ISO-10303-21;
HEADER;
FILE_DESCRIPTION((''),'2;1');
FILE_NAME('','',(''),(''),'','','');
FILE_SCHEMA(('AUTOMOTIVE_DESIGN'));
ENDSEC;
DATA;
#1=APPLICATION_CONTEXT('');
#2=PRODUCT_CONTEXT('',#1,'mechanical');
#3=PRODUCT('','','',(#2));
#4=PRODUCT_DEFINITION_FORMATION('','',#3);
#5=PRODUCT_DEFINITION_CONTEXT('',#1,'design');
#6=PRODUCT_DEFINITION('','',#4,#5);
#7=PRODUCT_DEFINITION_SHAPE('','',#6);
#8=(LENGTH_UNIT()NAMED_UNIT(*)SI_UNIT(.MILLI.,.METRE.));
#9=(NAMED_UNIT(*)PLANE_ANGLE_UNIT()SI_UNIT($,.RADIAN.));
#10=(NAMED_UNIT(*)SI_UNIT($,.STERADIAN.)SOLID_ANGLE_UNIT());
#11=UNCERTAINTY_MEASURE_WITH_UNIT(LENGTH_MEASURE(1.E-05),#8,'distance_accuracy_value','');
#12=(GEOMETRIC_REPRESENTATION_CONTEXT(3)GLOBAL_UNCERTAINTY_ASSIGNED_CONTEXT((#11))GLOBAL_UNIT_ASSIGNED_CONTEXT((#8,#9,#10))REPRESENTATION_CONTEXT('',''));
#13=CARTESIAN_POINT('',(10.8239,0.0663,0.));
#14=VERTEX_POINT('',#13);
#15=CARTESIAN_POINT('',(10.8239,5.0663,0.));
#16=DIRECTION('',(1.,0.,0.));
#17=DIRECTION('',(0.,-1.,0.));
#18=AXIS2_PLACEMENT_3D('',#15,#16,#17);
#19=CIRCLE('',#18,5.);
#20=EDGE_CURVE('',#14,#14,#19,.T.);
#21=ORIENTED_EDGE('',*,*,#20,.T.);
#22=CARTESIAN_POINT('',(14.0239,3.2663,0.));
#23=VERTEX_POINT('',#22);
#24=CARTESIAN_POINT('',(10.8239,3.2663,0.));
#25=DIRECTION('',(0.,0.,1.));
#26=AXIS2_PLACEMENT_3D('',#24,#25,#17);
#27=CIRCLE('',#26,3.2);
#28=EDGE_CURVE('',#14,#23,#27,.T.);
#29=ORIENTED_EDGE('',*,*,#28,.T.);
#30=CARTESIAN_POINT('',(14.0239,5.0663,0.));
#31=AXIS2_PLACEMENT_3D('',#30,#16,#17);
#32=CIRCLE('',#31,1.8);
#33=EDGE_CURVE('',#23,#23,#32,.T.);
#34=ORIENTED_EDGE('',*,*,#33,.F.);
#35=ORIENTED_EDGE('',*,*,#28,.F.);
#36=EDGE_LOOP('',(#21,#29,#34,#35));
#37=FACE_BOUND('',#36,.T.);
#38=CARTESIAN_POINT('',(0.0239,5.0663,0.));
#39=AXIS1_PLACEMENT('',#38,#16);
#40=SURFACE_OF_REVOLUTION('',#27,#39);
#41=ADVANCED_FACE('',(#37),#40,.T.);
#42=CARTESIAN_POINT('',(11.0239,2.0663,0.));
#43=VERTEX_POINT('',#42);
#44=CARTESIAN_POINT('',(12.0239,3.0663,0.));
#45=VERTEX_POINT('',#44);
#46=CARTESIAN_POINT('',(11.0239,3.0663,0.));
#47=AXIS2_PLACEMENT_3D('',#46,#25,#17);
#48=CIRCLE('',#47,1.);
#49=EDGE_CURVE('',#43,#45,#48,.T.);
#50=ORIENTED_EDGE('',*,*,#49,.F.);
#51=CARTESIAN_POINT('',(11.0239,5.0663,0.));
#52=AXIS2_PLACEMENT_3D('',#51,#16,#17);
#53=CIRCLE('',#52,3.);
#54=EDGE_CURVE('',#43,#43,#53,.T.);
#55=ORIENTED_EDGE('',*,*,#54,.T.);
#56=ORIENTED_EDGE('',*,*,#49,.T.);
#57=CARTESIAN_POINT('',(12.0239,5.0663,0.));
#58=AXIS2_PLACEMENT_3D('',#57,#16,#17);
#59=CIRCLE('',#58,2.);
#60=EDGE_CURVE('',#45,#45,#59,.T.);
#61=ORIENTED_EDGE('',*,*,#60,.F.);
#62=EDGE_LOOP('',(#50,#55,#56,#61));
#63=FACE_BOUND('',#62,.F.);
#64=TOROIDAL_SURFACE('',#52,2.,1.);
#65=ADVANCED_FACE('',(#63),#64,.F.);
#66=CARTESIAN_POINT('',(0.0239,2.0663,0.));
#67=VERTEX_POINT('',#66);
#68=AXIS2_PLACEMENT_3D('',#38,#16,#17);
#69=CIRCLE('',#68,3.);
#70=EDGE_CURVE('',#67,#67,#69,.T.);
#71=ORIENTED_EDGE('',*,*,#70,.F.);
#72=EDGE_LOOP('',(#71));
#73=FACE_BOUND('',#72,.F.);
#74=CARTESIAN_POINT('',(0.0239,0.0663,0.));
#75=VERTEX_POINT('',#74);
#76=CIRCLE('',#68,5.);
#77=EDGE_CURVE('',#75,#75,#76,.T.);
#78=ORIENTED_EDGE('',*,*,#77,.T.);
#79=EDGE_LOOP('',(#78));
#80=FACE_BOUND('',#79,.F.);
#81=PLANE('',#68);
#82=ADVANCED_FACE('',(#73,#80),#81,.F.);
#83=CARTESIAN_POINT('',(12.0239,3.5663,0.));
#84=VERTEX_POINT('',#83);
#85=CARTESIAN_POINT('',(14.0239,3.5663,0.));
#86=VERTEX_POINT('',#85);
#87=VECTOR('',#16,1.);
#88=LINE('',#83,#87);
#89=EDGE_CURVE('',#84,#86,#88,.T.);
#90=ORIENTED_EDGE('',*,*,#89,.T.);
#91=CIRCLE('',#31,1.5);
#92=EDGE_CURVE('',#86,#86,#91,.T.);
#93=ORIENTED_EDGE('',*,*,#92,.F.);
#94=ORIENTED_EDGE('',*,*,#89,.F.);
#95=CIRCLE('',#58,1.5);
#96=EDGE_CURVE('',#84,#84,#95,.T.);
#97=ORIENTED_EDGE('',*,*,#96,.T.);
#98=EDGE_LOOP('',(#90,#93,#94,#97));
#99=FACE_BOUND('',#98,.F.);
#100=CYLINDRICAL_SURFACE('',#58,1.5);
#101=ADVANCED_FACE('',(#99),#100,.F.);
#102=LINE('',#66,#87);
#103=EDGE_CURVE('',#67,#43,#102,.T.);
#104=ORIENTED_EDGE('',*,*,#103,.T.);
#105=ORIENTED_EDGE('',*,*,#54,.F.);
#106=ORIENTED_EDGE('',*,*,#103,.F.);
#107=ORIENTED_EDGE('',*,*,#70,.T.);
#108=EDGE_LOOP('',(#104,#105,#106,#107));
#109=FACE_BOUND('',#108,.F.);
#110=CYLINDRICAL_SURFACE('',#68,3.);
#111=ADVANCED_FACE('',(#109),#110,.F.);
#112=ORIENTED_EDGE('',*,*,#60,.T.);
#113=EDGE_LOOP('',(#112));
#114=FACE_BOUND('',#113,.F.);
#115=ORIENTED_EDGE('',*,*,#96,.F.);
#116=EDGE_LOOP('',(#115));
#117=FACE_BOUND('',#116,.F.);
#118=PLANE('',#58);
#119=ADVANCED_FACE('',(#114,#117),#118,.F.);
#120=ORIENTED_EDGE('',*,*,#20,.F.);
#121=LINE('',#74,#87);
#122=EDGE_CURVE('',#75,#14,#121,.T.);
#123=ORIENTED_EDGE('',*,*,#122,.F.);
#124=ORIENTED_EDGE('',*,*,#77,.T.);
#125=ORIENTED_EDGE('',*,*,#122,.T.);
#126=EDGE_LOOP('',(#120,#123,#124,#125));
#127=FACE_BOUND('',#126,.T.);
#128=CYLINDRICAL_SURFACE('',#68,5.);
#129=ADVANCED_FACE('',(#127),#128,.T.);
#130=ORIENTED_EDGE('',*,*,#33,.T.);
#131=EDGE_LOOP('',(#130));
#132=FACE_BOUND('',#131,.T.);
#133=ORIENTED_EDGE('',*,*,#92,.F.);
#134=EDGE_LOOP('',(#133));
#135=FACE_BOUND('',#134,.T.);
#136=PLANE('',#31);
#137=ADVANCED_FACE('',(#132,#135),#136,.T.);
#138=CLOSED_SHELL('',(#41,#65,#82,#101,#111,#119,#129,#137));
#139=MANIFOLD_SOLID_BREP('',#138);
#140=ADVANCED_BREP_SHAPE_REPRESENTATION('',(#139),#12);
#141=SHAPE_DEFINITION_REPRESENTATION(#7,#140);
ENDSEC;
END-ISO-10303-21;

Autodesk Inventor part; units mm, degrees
ref_plane "YZ Plane" through (0, 0, 0) normal (1, 0, 0) x (0, 1, 0)
ref_plane "XZ Plane" through (0, 0, 0) normal (0, 1, 0) x (-1, 0, 0)
ref_plane "XY Plane" through (0, 0, 0) normal (0, 0, 1) x (1, 0, 0)
sketch "Блок1" plane through (0, 0, 0) normal (0, 0, 1) x (1, 0, 0)
  line L0 (-20.8941, 6.9119) -> (-9.8941, 6.9119)
  line L1 (-8.8941, 8.4119) -> (-6.8941, 8.4119)
  point P0 (-11.6441, 7.6619)
sketch "Эскиз1" plane through (0, 0, 0) normal (0, 0, 1) x (1, 0, 0)
  line L0 (0.0239, 0.0663) -> (10.8239, 0.0663)
  line L1 (14.0239, 3.2663) -> (14.0239, 3.5663)
  arc A0 (10.8239, 0.0663) -> (14.0239, 3.2663) centre (10.8239, 3.2663) ccw
  line L2 (0.0239, 0.0663) -> (0.0239, 2.0663)
  line L3 (12.0239, 3.0663) -> (12.0239, 3.5663)
  arc A1 (11.0239, 2.0663) -> (12.0239, 3.0663) centre (11.0239, 3.0663) ccw
  line L4 (14.0239, 3.5663) -> (14.0239, 5.0663)
  line L5 (0.0239, 5.0663) -> (7.906, 5.0663)
  line L6 (0.0239, 2.0663) -> (11.0239, 2.0663)
  line L7 (12.0239, 3.5663) -> (14.0239, 3.5663)
  point P0 (0, 0)
  point P1 (14.0239, 0.0663)
  point P2 (11.0239, 2.0663)
  dimension "d8" = 2
  dimension "d15" = 3.2
  dimension "d18" = 5
  dimension "d19" = 10.8
revolve "Вращение1" add sketch "Эскиз1" angle 360 about axis through (0.0239, 5.0663, 0) along (1, 0, 0)
properties part number "12"
